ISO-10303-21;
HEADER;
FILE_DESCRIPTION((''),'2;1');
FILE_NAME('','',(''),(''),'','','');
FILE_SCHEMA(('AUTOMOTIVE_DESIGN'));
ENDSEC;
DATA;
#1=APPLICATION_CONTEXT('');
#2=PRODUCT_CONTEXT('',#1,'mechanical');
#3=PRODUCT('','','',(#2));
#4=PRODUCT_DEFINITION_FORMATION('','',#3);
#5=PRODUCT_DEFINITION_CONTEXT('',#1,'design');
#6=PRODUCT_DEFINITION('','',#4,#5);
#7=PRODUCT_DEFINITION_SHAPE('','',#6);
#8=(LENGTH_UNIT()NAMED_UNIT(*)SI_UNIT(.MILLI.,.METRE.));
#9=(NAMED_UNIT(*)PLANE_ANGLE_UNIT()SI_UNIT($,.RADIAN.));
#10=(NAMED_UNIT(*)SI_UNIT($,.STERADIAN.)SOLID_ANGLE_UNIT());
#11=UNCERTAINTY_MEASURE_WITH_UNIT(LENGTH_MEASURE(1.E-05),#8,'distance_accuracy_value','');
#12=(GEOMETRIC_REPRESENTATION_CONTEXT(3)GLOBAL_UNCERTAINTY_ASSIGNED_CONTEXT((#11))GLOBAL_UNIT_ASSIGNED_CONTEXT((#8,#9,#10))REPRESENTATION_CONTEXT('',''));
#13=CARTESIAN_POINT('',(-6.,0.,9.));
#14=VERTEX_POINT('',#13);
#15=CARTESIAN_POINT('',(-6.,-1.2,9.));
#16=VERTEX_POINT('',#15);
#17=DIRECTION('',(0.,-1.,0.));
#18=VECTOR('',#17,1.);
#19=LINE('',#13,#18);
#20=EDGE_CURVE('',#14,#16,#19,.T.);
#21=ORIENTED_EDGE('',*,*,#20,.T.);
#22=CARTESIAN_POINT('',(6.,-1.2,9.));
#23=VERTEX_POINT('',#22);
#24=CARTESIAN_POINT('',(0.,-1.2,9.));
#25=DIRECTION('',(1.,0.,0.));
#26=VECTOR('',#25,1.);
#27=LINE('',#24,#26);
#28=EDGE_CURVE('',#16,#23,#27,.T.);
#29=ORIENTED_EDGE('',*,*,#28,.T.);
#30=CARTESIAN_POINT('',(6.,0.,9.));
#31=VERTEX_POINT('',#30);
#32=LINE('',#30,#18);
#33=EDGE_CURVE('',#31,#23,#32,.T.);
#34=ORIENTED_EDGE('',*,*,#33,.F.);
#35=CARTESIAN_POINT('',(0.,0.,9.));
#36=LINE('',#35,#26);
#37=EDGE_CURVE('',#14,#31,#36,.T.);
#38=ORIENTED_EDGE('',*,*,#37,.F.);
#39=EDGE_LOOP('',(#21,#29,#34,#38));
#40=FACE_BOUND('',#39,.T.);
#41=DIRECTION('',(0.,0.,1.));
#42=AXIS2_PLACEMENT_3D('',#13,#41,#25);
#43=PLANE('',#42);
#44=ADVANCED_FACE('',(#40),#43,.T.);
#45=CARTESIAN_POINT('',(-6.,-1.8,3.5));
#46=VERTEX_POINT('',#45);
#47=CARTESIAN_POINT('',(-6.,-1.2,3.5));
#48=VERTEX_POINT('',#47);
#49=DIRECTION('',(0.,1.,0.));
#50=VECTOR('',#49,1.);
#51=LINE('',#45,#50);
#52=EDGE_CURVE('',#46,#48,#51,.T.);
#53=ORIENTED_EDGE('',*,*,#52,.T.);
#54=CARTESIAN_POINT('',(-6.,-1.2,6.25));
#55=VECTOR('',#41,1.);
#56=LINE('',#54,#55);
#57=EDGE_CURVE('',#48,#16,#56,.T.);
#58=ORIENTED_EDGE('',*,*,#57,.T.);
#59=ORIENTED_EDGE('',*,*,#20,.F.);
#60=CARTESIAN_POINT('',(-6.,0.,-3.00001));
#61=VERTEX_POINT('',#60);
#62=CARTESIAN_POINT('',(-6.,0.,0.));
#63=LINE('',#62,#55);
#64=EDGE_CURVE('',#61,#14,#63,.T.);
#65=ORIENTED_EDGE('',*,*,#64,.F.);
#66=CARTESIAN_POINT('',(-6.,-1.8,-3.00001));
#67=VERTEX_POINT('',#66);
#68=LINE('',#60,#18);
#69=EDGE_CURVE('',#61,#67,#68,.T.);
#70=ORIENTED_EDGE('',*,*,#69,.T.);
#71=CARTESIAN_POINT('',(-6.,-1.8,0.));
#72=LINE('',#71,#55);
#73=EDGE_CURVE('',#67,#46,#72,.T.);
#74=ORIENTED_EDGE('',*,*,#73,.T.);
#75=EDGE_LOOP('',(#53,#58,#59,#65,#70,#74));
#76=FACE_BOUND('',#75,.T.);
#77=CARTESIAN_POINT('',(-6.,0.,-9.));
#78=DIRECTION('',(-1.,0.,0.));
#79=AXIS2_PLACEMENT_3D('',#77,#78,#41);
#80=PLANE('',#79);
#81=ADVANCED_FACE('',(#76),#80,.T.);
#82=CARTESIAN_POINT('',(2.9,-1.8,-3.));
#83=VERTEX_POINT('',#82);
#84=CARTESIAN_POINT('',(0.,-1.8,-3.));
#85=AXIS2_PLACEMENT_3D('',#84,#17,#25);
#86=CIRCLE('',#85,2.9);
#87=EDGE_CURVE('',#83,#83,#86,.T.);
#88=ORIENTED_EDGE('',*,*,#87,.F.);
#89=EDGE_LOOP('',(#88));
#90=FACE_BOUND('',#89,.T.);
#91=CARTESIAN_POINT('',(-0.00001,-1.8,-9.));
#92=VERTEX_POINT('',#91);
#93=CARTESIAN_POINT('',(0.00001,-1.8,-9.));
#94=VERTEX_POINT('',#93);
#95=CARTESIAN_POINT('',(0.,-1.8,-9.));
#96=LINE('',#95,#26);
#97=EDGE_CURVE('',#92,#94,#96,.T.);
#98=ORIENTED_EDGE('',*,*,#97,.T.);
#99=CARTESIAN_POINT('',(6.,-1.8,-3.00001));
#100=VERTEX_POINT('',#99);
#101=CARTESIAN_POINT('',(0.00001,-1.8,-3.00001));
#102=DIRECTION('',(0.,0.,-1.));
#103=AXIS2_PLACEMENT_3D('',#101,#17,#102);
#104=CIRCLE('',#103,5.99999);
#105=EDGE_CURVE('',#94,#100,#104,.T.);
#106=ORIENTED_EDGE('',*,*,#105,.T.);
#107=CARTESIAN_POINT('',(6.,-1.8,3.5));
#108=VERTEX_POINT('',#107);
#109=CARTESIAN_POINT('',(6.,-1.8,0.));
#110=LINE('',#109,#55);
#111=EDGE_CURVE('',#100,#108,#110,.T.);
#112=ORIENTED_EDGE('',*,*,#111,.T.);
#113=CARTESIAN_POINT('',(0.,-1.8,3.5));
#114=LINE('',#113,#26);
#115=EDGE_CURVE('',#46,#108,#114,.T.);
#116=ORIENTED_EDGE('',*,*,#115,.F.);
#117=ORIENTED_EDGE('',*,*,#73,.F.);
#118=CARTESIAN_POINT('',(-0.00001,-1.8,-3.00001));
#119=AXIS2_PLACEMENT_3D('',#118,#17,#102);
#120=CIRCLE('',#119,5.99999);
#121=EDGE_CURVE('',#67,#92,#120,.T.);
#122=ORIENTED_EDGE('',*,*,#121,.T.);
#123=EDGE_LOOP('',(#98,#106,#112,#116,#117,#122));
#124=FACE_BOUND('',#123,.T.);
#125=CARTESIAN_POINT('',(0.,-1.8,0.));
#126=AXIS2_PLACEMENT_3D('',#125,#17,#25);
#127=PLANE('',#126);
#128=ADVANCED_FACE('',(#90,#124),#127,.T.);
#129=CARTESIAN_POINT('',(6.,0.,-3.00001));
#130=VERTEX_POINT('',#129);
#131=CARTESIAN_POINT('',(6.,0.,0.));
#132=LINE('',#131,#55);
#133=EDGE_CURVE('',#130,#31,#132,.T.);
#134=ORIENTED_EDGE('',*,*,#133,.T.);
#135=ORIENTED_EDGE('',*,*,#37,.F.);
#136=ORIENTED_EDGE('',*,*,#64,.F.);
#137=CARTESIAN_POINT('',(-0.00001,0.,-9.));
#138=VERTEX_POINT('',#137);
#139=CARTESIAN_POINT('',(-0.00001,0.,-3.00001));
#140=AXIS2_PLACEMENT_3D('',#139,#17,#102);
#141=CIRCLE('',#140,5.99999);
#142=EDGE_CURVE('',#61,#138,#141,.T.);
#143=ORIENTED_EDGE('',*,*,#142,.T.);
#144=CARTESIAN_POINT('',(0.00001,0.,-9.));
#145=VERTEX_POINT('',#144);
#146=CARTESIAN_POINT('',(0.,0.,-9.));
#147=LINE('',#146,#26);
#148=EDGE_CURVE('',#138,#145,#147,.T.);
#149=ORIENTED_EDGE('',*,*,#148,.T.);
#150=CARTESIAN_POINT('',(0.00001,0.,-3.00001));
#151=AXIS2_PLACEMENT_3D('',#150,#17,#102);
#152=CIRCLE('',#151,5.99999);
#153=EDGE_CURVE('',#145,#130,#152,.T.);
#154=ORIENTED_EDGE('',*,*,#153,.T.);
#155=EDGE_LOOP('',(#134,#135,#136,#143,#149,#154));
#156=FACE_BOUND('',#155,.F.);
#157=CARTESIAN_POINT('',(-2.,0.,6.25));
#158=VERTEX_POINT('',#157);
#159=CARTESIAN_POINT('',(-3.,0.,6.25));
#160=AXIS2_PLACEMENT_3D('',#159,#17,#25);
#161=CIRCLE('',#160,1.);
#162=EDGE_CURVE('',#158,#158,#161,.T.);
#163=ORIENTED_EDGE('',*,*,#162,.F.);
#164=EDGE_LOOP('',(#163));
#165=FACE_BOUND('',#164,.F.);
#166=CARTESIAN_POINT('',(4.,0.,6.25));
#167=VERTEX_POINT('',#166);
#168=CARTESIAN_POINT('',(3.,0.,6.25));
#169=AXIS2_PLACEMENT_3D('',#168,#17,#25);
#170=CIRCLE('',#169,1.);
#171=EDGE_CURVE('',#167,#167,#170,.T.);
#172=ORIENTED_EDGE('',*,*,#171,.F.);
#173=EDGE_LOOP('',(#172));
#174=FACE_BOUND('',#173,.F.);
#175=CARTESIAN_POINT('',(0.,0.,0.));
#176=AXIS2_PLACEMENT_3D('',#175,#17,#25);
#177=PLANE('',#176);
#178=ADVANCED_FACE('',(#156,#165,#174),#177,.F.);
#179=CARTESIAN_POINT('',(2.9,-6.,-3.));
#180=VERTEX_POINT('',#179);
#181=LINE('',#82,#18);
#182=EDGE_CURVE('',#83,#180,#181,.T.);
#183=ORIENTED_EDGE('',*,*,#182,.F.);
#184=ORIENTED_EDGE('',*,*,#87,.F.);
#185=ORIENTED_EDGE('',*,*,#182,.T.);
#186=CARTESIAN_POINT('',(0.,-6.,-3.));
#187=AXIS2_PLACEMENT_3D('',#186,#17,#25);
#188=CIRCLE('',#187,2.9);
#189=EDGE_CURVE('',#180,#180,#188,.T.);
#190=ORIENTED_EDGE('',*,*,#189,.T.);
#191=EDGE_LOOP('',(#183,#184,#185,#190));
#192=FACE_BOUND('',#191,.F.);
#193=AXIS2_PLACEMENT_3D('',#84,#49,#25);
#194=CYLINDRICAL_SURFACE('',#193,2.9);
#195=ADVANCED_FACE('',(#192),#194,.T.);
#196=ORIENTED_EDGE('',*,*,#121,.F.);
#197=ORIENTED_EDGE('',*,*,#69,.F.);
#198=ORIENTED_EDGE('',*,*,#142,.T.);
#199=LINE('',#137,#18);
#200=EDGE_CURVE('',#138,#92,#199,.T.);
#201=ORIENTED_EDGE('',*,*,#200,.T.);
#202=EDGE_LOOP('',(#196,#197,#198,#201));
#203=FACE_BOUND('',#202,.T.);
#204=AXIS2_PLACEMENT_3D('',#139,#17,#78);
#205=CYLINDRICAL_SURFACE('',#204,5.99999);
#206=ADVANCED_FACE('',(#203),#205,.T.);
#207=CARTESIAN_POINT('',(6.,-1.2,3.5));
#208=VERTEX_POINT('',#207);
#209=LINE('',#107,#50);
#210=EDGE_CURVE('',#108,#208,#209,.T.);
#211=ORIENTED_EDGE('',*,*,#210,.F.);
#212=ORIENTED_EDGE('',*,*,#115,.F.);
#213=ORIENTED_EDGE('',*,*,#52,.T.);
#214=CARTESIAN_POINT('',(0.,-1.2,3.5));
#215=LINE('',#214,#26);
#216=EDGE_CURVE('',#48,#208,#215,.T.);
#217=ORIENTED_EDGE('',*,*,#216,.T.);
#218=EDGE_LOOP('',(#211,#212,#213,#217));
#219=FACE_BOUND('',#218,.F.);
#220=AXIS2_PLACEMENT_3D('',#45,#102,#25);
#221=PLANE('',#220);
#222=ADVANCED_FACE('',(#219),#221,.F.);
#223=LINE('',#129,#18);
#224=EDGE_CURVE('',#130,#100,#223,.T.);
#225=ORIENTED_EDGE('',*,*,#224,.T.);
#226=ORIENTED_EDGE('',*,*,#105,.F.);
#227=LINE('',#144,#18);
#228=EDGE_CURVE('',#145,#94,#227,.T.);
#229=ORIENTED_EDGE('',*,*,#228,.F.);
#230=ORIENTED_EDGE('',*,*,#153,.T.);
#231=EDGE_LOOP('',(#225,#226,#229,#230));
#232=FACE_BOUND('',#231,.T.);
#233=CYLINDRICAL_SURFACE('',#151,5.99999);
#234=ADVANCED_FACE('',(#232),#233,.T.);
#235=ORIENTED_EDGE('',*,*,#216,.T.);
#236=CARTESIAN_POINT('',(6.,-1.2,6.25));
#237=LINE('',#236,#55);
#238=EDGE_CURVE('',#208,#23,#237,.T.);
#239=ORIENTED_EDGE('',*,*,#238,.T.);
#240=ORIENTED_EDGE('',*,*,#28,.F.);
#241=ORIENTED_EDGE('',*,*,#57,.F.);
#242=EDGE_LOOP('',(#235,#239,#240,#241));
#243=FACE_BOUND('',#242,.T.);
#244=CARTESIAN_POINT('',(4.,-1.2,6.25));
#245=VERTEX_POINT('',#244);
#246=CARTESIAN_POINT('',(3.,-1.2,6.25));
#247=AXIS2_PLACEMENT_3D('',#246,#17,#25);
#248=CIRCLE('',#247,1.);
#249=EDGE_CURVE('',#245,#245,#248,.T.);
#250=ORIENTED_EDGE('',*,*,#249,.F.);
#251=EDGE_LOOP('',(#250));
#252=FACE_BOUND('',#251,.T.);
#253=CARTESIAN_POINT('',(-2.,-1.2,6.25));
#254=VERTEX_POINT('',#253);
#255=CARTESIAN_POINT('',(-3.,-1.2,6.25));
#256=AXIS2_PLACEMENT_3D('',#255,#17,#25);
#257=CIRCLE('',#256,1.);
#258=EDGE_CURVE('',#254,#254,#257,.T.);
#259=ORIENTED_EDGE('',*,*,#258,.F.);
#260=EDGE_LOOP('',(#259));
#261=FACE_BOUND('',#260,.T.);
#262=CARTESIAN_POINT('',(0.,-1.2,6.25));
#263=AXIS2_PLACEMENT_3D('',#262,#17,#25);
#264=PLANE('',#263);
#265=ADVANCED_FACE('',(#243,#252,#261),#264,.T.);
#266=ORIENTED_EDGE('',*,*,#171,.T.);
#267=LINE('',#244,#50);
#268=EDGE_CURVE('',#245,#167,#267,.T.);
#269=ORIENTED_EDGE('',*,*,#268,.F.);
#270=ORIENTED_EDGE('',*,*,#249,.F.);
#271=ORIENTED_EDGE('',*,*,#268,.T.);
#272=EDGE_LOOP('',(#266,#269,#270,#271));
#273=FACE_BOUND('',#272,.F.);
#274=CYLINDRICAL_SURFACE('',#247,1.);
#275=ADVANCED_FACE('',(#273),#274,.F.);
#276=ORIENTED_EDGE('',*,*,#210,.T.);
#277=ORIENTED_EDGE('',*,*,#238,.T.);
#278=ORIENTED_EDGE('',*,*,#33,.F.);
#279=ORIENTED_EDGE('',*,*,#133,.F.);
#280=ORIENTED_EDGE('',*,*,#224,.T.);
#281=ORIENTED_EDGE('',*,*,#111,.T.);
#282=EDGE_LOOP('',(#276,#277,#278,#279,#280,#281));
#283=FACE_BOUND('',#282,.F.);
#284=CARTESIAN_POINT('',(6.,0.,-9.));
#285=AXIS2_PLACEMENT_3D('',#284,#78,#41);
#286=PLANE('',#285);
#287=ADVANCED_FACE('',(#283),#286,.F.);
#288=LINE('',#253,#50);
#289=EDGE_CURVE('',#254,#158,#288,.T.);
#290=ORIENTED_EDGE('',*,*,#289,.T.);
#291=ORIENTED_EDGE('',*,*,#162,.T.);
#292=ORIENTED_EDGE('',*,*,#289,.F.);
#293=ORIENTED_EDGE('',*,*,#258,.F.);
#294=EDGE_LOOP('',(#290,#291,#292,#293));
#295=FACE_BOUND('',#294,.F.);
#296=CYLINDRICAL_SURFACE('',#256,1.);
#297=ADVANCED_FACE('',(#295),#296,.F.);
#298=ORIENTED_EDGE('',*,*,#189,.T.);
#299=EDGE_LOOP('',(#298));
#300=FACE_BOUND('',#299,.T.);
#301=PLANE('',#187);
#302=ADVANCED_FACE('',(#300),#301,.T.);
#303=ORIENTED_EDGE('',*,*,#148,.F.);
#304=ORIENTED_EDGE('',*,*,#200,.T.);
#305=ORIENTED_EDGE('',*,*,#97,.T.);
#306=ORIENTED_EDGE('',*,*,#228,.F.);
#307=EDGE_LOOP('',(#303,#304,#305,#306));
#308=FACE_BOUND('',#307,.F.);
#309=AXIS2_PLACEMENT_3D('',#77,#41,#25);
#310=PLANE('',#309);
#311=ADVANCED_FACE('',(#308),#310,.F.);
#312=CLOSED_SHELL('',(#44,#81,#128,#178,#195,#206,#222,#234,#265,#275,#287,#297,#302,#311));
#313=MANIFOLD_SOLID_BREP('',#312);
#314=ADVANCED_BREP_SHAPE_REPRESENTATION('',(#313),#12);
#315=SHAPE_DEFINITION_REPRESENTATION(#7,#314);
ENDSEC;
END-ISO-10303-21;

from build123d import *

# Parameters (mm, degrees)
F0_W     = 12
F0_H     = 18
F1_DEPTH = 1.8
F2_R     = 5.99999
F3_W     = 12
F3_H     = 5.5
F4_DEPTH = 0.6
F5_R     = 2.9
F6_DEPTH = 4.2
F7_R     = 1
F8_DEPTH = 25


# Not quite as in the source:
# - a fillet or chamfer is up to 0.001 mm smaller than in the source, because OpenCascade refuses the exact size


with BuildPart() as f1:
    # F0 (on Front) → F1 (new body)
    with BuildSketch(Plane.XZ):
        Rectangle(F0_W, F0_H)
    extrude(amount=F1_DEPTH)

    # F2 (radius 6 in the source; OpenCascade refuses exactly that, so slightly less here)
    f2_edges = [f1.edges().sort_by_distance(p)[0] for p in [
        (6, -0.9, -9),
        (-6, -0.9, -9),
    ]]
    fillet(f2_edges, radius=F2_R)

    # F3 (on face) → F4 (cut)
    with BuildSketch(Plane.XZ.offset(1.8)):
        with Locations((0, 6.25)):
            Rectangle(F3_W, F3_H)
    extrude(amount=-F4_DEPTH, mode=Mode.SUBTRACT)

    # F5 (on face) → F6 (join)
    with BuildSketch(Plane.XZ.offset(1.8)):
        with Locations((0, -3)):
            Circle(F5_R)
    extrude(amount=F6_DEPTH)

    # F7 (on face) → F8 (cut)
    with BuildSketch(Plane.XZ.offset(1.2)):
        with Locations((-3, 6.25)):
            Circle(F7_R)
        with Locations((3, 6.25)):
            Circle(F7_R)
    extrude(amount=-F8_DEPTH, mode=Mode.SUBTRACT)


solid = f1.part
